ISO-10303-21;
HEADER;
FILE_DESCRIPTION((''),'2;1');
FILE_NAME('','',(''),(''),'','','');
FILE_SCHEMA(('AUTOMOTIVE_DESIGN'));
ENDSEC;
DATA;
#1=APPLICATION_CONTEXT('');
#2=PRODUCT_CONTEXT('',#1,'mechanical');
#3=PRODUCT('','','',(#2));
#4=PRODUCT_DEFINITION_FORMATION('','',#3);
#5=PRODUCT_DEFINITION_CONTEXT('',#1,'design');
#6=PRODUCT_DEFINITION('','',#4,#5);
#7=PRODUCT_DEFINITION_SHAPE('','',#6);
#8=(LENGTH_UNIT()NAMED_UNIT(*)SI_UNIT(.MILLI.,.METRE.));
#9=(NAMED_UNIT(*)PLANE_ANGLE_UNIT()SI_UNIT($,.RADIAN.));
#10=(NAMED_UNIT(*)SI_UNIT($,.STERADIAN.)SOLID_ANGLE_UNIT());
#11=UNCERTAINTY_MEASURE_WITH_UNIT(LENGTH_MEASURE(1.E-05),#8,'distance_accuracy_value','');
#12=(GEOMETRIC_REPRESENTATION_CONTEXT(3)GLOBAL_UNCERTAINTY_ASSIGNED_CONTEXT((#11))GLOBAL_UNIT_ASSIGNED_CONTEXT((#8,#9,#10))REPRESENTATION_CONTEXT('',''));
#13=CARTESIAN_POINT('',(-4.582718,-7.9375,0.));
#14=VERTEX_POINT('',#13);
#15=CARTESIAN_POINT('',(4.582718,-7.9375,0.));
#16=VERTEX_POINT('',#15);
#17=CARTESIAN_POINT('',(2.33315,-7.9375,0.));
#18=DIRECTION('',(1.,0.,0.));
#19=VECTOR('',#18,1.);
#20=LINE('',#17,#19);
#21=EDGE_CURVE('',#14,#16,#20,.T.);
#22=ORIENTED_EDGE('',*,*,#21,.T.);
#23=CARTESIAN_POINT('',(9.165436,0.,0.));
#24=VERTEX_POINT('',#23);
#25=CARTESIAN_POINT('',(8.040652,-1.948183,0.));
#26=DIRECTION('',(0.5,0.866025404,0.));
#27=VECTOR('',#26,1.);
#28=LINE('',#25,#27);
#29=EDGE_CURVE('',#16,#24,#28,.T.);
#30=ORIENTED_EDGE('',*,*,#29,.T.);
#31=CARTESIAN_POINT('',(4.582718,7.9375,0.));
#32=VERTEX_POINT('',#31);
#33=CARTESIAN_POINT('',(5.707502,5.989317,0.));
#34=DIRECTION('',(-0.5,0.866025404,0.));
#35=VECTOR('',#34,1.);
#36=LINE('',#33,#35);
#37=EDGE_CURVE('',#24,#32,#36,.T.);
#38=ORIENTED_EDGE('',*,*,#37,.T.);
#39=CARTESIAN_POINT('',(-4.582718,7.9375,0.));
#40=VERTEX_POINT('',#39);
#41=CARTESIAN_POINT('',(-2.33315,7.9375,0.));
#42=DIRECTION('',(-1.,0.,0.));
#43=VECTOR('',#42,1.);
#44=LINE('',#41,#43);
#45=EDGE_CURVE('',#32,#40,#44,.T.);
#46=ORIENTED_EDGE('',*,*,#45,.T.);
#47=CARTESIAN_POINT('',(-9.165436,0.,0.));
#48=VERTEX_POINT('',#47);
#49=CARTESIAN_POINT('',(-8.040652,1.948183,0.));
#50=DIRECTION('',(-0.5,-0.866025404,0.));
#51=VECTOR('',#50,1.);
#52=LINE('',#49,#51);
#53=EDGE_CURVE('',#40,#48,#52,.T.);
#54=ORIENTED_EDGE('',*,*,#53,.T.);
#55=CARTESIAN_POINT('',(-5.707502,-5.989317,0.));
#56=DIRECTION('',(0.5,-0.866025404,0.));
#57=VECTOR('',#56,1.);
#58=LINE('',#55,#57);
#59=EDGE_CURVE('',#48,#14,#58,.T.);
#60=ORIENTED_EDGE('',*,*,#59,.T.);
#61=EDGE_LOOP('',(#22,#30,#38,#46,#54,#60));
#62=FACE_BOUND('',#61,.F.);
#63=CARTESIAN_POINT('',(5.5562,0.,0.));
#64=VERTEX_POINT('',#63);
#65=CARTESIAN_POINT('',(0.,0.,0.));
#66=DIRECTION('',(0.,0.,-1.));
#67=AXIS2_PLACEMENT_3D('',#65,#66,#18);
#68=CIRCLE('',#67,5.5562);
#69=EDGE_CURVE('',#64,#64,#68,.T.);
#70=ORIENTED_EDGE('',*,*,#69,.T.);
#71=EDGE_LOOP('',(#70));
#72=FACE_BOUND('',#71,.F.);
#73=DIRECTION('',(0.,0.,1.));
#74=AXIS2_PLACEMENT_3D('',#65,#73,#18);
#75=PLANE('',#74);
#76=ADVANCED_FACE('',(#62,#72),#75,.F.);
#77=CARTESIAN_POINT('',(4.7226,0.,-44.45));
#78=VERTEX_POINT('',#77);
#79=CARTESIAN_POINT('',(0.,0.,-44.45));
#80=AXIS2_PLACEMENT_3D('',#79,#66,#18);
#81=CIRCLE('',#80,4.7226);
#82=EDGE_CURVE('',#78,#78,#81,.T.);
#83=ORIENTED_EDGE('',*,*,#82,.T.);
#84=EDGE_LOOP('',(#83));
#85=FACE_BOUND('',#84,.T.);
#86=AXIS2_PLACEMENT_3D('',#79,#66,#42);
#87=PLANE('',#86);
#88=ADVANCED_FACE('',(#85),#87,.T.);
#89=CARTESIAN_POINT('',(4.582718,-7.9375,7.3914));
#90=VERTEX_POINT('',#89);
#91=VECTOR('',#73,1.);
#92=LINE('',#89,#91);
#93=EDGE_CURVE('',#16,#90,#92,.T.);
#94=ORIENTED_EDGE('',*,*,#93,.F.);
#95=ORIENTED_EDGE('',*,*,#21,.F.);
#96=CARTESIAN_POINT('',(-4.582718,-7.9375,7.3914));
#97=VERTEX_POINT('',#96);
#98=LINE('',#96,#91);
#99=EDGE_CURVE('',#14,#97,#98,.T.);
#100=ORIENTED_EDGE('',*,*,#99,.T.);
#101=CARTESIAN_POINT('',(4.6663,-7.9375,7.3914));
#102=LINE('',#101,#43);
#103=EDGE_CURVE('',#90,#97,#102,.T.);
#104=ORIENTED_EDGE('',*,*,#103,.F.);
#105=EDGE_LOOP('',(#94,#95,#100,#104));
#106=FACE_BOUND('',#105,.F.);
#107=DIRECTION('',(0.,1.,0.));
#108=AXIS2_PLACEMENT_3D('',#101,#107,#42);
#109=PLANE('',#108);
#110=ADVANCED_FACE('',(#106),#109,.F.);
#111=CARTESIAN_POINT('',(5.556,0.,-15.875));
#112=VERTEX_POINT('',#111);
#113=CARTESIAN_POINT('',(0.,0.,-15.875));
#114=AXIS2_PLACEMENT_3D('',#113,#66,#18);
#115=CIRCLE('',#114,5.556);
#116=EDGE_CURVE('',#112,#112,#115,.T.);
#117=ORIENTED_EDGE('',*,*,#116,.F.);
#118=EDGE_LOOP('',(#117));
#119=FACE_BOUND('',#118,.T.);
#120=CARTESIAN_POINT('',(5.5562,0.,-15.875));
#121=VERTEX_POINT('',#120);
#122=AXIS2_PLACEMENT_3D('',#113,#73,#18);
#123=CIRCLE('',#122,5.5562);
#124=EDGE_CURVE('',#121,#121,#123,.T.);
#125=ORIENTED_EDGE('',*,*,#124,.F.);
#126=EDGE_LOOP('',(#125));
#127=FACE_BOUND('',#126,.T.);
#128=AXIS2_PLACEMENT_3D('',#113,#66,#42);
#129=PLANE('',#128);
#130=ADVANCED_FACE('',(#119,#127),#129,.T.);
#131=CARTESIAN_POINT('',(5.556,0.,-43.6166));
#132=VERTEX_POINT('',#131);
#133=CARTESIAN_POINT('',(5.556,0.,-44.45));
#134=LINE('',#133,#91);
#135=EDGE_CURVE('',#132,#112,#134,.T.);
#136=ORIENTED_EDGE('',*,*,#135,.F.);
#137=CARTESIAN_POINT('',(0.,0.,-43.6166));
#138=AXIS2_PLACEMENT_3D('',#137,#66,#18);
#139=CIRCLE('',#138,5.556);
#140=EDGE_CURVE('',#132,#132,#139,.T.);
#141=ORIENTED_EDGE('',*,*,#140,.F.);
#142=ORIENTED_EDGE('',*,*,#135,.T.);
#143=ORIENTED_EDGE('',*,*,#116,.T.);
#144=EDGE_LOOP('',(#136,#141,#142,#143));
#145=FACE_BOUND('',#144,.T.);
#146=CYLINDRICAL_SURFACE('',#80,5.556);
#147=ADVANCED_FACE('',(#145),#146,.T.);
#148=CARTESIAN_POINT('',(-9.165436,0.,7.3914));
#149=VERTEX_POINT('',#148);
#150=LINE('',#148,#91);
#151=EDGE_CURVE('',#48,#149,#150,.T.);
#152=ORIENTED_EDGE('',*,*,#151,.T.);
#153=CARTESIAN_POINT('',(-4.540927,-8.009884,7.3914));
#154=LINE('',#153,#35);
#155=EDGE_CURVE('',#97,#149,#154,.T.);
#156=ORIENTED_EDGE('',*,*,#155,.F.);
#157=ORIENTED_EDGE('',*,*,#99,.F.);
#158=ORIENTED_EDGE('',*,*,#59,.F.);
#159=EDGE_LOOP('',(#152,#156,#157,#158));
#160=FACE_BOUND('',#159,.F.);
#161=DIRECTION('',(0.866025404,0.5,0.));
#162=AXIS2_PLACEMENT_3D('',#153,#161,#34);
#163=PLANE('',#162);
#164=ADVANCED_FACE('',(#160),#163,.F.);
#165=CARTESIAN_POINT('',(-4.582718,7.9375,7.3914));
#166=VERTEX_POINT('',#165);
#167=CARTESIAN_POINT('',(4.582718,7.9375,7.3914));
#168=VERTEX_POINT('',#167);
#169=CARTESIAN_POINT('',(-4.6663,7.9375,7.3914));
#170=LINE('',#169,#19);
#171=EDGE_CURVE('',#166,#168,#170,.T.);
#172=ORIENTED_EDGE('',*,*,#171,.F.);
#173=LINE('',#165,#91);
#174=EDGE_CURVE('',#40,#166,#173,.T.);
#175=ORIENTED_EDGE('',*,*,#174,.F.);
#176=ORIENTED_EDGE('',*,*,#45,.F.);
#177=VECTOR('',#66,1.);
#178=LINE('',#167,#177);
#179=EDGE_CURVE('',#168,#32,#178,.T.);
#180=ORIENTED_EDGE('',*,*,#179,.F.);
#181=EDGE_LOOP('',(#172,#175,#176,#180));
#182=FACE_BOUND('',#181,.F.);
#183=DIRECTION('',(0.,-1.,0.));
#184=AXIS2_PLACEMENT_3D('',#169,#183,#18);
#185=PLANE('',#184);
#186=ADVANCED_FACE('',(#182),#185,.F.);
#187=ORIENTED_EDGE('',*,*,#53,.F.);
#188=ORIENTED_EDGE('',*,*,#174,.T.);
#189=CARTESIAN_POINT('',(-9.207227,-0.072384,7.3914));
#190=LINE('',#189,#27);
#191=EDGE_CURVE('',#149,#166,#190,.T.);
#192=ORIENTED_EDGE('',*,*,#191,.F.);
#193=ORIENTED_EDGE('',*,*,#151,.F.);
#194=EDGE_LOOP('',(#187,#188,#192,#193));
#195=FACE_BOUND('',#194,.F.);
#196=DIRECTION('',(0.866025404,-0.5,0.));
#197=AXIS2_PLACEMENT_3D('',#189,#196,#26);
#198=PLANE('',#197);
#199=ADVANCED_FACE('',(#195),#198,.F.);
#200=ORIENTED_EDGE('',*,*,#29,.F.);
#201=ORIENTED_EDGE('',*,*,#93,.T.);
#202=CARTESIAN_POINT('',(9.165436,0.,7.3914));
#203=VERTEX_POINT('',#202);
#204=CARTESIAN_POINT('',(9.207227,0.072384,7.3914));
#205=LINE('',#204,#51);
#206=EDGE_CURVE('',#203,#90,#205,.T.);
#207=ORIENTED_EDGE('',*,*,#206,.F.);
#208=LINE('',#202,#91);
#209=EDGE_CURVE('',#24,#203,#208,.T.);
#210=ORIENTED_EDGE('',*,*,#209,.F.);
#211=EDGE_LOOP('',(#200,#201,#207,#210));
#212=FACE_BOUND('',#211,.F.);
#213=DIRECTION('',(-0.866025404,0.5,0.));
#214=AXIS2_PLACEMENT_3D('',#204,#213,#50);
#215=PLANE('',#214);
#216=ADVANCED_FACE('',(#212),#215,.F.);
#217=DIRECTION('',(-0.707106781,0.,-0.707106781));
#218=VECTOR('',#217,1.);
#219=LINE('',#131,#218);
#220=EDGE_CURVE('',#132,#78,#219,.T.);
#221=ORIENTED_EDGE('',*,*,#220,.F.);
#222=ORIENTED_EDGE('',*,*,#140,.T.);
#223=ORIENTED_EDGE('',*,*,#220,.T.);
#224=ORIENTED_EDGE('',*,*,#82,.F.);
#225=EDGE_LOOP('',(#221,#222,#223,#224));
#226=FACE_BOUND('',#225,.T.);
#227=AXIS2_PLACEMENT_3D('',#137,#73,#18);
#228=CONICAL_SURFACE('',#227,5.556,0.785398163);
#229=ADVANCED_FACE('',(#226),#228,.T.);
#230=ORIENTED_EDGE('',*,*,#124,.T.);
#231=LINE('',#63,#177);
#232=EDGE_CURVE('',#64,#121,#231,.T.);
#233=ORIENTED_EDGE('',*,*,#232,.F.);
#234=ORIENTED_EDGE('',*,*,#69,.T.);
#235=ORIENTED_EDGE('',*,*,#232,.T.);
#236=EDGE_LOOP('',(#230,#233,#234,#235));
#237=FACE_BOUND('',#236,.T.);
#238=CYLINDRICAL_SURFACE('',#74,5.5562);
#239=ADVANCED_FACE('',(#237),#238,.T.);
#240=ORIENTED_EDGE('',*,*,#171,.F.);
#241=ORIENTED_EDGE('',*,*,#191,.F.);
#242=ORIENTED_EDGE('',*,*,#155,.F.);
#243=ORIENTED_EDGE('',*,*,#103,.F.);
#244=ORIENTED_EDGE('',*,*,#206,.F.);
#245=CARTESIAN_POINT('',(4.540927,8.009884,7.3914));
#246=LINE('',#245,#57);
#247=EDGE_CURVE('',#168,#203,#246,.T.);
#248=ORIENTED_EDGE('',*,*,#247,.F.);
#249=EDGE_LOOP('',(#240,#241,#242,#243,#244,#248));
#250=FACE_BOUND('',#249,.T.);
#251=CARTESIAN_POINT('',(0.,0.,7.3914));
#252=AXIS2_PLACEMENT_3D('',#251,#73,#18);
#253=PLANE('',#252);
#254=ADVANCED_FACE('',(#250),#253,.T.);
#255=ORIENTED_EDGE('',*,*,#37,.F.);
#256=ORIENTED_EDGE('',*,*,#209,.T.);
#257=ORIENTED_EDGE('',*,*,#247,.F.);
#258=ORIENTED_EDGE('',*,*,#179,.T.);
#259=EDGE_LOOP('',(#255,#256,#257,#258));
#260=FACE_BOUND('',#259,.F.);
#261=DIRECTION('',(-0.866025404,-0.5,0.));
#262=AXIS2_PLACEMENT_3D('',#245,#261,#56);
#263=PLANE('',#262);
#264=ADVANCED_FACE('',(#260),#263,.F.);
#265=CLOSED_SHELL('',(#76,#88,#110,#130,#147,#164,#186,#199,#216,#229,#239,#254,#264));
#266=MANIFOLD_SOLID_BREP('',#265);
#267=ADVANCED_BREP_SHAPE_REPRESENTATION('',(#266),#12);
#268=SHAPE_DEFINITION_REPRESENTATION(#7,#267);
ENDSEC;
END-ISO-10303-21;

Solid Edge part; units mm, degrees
sketch "Sketch1" plane through (0, 0, 0) normal (0, 0, 1) x (1, 0, 0)
  circle A0 centre (0, 0) radius 9.2075
  dimension "D1" = 18.415
extrude "Protrusion1" add sketch "Sketch1" along normal blind 7.3914
sketch "Sketch2" plane through (0, 0, 0) normal (0, 0, -1) x (1, 0, 0)
  circle A0 centre (0, 0) radius 5.5562
extrude "Protrusion2" add sketch "Sketch2" along normal blind 44.45
sketch "Sketch3" plane through (0, 0, -44.45) normal (0, 0, -1) x (1, 0, 0)
  circle A0 centre (0, 0) radius 5.556
extrude "Cutout1" cut sketch "Sketch3" against normal blind 28.575 flip side to cut
chamfer "Chamfer_1" distance 0.8334 angle 45 1 edges at (-5.556, 0, -44.45)
sketch "Sketch4" plane through (0, 0, 7.3914) normal (0, 0, 1) x (1, 0, 0)
  line L0 (-4.6663, 7.9375) -> (4.6663, 7.9375)
  dimension "D1" = 15.875
extrude "Cutout2" cut sketch "Sketch4" against normal up to next material side at (0, 7.9875, 7.3914)
pattern_circular "Pattern1" count 6 over 360 about axis through (0, 0, 7.3914) along (0, 0, 1) of "Cutout2"
properties part number "24100092"
